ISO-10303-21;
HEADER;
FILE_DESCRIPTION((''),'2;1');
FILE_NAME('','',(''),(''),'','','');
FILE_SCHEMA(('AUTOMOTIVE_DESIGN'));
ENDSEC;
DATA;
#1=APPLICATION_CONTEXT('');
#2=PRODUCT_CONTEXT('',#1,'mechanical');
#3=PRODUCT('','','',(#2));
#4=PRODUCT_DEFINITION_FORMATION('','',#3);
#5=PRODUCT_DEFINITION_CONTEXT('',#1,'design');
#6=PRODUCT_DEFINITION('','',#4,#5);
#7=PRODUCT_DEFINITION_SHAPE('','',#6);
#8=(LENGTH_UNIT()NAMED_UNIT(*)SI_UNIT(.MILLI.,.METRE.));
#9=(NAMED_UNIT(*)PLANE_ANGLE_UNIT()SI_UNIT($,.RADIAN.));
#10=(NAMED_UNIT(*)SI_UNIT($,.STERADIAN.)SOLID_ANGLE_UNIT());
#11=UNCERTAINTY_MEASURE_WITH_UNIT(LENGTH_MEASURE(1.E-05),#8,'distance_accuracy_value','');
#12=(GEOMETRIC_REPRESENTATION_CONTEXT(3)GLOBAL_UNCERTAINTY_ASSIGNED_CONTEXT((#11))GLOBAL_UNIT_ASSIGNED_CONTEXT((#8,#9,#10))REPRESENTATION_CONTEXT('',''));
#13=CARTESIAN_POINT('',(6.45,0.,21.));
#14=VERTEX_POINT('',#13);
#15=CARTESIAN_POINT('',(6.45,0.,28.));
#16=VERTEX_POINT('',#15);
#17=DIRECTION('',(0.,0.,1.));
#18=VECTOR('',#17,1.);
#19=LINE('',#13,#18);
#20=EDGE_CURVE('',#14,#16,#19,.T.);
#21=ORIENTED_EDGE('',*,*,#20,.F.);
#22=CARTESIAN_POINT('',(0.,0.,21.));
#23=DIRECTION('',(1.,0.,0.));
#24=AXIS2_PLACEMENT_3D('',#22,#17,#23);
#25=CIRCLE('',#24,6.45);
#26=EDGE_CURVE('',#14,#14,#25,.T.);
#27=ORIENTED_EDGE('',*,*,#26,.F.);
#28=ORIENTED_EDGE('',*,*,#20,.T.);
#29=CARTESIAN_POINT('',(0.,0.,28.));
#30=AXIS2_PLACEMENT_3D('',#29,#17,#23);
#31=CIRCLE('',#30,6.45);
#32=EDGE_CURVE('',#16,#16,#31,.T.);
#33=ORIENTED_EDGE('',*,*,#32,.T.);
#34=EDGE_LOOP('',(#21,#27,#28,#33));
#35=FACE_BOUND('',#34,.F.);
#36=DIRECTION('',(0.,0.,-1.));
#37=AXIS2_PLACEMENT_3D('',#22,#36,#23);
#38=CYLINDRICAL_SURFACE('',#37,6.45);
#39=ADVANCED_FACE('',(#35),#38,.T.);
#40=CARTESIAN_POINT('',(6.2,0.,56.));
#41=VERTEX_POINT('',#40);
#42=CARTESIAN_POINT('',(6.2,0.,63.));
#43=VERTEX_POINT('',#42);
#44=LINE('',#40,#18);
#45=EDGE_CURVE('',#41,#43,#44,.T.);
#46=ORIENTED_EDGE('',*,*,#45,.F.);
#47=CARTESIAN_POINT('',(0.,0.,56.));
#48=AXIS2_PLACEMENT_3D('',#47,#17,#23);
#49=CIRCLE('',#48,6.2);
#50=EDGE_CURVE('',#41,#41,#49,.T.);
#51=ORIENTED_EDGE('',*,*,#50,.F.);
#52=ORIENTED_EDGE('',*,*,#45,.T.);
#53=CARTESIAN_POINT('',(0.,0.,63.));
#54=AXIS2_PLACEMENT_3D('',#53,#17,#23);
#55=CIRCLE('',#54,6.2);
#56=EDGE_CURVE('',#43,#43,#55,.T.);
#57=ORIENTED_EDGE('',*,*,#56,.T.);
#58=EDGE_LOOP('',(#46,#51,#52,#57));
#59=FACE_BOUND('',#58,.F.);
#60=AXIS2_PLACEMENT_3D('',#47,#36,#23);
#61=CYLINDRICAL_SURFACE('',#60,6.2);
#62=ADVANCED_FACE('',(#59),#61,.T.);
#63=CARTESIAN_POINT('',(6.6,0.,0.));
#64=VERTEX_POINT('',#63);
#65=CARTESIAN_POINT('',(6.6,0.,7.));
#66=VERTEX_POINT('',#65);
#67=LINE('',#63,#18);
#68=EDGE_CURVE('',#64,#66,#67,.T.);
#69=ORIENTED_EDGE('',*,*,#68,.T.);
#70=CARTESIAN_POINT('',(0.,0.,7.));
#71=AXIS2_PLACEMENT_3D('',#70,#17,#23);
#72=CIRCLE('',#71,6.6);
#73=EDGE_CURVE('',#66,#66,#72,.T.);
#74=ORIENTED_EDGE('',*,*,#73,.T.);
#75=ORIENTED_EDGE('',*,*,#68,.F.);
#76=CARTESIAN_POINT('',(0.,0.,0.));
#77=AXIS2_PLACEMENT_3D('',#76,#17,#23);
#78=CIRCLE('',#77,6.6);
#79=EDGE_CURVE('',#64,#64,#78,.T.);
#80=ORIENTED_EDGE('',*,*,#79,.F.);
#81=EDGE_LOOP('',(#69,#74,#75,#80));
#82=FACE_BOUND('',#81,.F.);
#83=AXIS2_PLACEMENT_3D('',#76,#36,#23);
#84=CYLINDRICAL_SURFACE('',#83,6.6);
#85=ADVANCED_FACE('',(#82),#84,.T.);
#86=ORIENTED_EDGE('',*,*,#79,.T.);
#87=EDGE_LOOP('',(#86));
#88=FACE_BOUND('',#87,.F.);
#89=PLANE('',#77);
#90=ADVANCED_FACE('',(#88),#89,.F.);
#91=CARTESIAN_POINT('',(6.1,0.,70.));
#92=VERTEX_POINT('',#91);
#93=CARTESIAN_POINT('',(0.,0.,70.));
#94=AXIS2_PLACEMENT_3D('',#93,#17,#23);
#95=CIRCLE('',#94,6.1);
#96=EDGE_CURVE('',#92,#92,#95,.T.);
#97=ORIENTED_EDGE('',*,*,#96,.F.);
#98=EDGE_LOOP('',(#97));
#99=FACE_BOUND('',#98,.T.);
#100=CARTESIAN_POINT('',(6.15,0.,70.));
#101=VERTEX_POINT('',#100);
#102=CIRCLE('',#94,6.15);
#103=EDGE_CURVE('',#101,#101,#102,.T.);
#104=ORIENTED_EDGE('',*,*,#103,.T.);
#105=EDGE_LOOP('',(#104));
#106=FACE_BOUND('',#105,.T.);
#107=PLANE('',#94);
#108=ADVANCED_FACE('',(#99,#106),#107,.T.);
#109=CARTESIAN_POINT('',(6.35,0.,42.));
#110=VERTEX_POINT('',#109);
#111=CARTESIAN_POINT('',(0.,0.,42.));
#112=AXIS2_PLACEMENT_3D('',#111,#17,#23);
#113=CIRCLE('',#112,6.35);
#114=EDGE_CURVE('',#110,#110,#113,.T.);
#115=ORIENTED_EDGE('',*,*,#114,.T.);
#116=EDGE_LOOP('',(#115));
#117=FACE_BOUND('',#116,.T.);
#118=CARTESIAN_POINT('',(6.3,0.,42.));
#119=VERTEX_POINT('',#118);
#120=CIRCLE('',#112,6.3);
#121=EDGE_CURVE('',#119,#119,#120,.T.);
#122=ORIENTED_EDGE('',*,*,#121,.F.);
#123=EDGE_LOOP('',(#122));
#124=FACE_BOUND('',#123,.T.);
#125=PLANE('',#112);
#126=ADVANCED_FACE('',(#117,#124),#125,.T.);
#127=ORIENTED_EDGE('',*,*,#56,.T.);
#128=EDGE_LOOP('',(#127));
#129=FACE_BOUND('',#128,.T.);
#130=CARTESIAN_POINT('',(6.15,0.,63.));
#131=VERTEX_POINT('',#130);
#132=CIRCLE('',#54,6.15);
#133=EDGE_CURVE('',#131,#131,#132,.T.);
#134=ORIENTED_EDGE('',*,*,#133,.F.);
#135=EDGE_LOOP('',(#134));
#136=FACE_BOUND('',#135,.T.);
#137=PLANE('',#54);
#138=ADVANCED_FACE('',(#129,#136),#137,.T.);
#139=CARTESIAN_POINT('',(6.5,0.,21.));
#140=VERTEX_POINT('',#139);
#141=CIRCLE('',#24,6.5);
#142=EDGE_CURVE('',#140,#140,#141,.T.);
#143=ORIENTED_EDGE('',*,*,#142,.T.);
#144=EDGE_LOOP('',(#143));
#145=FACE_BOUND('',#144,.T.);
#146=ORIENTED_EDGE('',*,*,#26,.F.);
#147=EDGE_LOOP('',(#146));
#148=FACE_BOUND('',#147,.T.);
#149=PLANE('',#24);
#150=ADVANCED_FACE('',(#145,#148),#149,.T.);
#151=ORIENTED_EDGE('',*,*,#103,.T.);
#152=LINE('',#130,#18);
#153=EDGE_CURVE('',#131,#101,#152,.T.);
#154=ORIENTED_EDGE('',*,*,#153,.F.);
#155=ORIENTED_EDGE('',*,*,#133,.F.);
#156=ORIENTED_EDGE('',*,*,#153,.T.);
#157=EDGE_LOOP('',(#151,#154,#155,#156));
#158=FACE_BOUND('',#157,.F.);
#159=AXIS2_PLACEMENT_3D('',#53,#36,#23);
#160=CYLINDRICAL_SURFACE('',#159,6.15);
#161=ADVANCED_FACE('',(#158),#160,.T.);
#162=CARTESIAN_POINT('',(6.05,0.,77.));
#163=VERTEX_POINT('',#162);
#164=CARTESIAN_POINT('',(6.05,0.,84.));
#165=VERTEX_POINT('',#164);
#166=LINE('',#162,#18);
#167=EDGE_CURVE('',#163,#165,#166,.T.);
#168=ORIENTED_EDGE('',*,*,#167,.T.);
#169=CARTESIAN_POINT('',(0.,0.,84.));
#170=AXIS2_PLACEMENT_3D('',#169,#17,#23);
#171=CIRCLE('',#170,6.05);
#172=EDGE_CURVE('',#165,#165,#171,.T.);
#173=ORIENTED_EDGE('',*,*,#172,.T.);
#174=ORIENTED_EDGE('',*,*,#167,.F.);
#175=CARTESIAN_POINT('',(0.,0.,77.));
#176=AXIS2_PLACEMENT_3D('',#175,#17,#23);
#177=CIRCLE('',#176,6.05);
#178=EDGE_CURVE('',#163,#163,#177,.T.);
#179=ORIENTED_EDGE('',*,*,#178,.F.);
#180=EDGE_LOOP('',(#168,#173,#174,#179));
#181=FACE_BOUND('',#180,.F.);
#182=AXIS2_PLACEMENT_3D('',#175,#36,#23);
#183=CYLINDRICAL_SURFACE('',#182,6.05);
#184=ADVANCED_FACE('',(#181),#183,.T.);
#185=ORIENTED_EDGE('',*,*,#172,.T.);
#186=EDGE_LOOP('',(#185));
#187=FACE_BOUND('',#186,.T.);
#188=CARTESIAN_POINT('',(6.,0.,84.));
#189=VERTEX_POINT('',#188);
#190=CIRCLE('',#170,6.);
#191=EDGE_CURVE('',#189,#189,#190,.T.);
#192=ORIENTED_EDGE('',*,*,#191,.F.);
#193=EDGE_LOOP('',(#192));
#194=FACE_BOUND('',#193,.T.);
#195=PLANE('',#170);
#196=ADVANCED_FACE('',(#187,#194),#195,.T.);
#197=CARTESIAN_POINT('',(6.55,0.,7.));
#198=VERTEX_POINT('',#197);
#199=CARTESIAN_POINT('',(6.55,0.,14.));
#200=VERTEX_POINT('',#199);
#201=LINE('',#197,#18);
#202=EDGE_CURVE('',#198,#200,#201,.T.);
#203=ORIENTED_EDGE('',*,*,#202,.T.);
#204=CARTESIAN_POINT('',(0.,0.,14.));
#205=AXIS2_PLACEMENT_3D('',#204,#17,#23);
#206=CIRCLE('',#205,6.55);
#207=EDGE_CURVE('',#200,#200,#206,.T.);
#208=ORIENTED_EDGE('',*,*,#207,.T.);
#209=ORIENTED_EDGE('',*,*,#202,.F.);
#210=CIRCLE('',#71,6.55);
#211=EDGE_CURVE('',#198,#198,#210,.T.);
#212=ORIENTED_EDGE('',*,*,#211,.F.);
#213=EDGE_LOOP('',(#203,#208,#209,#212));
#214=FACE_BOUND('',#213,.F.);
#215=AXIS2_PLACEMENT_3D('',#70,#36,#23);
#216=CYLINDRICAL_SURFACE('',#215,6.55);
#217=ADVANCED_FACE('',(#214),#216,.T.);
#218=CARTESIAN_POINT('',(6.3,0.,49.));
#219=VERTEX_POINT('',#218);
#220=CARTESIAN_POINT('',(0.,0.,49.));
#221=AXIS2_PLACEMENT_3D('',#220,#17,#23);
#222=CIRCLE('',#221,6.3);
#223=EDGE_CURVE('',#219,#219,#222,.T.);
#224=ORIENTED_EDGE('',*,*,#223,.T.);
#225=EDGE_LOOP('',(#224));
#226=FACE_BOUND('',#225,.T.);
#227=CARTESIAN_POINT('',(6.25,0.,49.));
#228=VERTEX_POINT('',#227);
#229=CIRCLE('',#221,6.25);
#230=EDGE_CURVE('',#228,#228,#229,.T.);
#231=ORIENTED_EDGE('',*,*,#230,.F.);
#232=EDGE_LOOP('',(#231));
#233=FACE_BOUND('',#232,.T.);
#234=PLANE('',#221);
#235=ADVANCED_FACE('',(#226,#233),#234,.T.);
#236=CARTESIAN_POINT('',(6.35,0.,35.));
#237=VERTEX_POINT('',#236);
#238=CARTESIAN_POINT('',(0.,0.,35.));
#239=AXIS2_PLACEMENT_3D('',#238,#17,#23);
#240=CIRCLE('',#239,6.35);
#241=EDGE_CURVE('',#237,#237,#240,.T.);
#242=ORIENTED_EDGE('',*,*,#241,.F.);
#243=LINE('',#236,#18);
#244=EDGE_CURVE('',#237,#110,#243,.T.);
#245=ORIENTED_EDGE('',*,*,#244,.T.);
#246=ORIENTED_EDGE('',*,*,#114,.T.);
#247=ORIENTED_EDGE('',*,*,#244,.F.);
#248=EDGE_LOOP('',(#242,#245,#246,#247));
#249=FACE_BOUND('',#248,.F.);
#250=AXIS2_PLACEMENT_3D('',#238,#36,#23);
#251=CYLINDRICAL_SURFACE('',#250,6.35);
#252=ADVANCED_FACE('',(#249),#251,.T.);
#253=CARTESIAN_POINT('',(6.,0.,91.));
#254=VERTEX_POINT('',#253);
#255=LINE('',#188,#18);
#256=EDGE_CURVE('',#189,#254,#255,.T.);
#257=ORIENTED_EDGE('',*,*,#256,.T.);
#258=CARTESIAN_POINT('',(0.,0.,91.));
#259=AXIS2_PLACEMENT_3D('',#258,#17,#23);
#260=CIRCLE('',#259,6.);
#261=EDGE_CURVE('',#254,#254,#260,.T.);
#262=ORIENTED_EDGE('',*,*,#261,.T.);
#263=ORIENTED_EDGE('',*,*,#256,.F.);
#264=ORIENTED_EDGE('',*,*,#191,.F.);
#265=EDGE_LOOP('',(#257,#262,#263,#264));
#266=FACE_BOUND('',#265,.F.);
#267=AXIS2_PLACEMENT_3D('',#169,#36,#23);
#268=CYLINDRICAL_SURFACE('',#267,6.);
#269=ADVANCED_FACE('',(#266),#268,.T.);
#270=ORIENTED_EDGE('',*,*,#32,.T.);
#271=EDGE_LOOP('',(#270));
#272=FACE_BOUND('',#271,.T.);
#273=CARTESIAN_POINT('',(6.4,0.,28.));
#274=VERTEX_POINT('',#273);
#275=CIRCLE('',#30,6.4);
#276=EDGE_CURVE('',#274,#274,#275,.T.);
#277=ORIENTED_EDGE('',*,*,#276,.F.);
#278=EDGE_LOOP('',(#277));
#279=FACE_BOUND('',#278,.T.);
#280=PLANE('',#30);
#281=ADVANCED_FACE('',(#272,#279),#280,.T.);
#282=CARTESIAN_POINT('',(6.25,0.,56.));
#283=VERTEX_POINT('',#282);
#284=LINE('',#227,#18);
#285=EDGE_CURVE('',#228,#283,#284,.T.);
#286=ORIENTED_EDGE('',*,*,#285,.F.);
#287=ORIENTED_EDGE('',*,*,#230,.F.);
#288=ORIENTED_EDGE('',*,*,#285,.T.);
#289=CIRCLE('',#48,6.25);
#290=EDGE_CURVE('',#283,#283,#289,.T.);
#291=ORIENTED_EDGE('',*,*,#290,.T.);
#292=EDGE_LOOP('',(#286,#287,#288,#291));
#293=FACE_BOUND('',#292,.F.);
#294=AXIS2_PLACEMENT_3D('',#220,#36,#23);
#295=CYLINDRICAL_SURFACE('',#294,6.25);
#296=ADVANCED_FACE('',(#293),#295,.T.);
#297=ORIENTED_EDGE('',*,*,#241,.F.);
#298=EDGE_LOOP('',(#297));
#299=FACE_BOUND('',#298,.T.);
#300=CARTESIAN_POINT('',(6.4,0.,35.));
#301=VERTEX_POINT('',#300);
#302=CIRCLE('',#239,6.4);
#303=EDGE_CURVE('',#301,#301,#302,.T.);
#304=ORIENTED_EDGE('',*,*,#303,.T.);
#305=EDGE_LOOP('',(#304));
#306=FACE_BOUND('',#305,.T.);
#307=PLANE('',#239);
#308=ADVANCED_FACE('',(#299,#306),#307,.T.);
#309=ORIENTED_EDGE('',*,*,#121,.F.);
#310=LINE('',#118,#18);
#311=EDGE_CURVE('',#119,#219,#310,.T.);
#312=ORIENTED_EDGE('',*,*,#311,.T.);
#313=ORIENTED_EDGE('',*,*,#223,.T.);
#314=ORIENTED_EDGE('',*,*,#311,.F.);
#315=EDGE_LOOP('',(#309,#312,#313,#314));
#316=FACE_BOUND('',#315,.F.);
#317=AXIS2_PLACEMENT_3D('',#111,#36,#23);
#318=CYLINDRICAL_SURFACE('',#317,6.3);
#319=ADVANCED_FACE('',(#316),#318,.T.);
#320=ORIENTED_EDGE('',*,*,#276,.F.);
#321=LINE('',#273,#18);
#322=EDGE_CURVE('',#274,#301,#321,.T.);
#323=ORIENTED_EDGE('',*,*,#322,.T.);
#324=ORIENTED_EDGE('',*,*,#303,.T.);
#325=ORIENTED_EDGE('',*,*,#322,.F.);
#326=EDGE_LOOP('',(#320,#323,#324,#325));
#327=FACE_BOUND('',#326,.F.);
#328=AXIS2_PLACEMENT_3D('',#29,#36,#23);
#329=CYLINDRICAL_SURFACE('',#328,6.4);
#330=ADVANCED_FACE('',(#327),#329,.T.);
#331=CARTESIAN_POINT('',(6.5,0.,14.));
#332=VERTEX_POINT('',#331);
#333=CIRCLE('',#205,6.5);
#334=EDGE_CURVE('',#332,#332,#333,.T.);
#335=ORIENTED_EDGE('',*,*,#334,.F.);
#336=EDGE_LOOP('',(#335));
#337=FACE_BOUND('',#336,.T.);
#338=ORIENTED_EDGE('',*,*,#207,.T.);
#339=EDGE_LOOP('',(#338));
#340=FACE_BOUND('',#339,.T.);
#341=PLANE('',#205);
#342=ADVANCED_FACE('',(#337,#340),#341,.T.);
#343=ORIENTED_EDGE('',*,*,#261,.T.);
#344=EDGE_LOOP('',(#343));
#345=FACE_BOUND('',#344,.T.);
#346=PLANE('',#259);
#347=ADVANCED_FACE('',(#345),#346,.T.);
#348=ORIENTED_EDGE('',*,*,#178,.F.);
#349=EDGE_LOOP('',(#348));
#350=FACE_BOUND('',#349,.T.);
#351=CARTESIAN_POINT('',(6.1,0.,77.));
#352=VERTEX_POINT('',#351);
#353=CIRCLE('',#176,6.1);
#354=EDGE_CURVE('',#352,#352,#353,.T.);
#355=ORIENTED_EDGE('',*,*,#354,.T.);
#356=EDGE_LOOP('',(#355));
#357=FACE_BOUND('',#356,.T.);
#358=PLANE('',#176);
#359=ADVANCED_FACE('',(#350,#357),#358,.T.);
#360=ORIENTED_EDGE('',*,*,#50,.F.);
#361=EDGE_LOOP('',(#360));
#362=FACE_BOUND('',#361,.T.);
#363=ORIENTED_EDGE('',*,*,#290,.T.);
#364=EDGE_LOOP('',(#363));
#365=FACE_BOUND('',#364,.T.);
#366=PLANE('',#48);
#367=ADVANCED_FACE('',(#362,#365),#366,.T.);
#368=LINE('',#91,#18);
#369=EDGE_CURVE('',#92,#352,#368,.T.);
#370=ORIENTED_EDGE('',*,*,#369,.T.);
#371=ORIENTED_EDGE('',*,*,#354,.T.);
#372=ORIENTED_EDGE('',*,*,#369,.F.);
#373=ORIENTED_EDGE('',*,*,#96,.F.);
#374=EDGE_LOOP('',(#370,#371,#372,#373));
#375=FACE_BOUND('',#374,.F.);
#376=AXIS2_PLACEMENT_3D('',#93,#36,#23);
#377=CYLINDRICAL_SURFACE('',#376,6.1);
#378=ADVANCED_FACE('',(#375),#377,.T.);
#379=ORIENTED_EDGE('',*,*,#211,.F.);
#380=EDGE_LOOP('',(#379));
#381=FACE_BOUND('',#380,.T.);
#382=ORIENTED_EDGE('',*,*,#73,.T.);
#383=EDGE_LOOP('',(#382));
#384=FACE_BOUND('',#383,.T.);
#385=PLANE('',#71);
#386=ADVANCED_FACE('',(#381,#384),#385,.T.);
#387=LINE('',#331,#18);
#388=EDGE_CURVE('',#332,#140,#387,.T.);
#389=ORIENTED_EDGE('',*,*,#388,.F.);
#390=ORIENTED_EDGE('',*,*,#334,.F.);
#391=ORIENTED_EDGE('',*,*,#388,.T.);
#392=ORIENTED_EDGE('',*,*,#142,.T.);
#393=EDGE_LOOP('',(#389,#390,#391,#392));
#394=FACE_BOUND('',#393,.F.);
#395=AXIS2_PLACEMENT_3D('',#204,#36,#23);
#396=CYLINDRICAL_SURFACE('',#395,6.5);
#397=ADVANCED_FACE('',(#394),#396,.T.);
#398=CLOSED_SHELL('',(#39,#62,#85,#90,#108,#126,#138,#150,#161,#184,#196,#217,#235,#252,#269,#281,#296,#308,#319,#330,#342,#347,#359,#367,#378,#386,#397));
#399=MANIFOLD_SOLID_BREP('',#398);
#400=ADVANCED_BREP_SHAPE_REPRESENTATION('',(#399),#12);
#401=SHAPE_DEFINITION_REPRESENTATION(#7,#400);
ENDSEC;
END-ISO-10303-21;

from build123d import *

# Parameters (mm, degrees)
F0_R      = 6.6
F1_DEPTH  = 7
F2_R      = 6.55
F3_DEPTH  = 7
F4_R      = 6.5
F5_DEPTH  = 7
F6_R      = 6.45
F7_DEPTH  = 7
F8_R      = 6.4
F9_DEPTH  = 7
F10_R     = 6.35
F11_DEPTH = 7
F12_R     = 6.3
F13_DEPTH = 7
F14_R     = 6.25
F15_DEPTH = 7
F16_R     = 6.2
F17_DEPTH = 7
F18_R     = 6.15
F19_DEPTH = 7
F20_R     = 6.1
F21_DEPTH = 7
F22_R     = 6.05
F23_DEPTH = 7
F24_R     = 6
F25_DEPTH = 7


# Not quite as in the source:
# - a feature of the source that left no trace in its solid (it failed there, or was rolled back) is left out


with BuildPart() as f1:
    # F0 (on Top) → F1 (new body)
    with BuildSketch(Plane.XY):
        Circle(F0_R)
    extrude(amount=F1_DEPTH)

    # F2 (on face) → F3 (join)
    with BuildSketch(Plane.XY.offset(7)):
        Circle(F2_R)
    extrude(amount=F3_DEPTH)

    # F4 (on face) → F5 (join)
    with BuildSketch(Plane.XY.offset(14)):
        Circle(F4_R)
    extrude(amount=F5_DEPTH)

    # F6 (on face) → F7 (join)
    with BuildSketch(Plane.XY.offset(21)):
        Circle(F6_R)
    extrude(amount=F7_DEPTH)

    # F8 (on face) → F9 (join)
    with BuildSketch(Plane.XY.offset(28)):
        Circle(F8_R)
    extrude(amount=F9_DEPTH)

    # F10 (on face) → F11 (join)
    with BuildSketch(Plane.XY.offset(35)):
        Circle(F10_R)
    extrude(amount=F11_DEPTH)

    # F12 (on face) → F13 (join)
    with BuildSketch(Plane.XY.offset(42)):
        Circle(F12_R)
    extrude(amount=F13_DEPTH)

    # F14 (on face) → F15 (join)
    with BuildSketch(Plane.XY.offset(49)):
        Circle(F14_R)
    extrude(amount=F15_DEPTH)

    # F16 (on face) → F17 (join)
    with BuildSketch(Plane.XY.offset(56)):
        Circle(F16_R)
    extrude(amount=F17_DEPTH)

    # F18 (on face) → F19 (join)
    with BuildSketch(Plane.XY.offset(63)):
        Circle(F18_R)
    extrude(amount=F19_DEPTH)

    # F20 (on face) → F21 (join)
    with BuildSketch(Plane.XY.offset(70)):
        Circle(F20_R)
    extrude(amount=F21_DEPTH)

    # F22 (on face) → F23 (join)
    with BuildSketch(Plane.XY.offset(77)):
        Circle(F22_R)
    extrude(amount=F23_DEPTH)

    # F24 (on face) → F25 (join)
    with BuildSketch(Plane.XY.offset(84)):
        Circle(F24_R)
    extrude(amount=F25_DEPTH)


solid = f1.part
